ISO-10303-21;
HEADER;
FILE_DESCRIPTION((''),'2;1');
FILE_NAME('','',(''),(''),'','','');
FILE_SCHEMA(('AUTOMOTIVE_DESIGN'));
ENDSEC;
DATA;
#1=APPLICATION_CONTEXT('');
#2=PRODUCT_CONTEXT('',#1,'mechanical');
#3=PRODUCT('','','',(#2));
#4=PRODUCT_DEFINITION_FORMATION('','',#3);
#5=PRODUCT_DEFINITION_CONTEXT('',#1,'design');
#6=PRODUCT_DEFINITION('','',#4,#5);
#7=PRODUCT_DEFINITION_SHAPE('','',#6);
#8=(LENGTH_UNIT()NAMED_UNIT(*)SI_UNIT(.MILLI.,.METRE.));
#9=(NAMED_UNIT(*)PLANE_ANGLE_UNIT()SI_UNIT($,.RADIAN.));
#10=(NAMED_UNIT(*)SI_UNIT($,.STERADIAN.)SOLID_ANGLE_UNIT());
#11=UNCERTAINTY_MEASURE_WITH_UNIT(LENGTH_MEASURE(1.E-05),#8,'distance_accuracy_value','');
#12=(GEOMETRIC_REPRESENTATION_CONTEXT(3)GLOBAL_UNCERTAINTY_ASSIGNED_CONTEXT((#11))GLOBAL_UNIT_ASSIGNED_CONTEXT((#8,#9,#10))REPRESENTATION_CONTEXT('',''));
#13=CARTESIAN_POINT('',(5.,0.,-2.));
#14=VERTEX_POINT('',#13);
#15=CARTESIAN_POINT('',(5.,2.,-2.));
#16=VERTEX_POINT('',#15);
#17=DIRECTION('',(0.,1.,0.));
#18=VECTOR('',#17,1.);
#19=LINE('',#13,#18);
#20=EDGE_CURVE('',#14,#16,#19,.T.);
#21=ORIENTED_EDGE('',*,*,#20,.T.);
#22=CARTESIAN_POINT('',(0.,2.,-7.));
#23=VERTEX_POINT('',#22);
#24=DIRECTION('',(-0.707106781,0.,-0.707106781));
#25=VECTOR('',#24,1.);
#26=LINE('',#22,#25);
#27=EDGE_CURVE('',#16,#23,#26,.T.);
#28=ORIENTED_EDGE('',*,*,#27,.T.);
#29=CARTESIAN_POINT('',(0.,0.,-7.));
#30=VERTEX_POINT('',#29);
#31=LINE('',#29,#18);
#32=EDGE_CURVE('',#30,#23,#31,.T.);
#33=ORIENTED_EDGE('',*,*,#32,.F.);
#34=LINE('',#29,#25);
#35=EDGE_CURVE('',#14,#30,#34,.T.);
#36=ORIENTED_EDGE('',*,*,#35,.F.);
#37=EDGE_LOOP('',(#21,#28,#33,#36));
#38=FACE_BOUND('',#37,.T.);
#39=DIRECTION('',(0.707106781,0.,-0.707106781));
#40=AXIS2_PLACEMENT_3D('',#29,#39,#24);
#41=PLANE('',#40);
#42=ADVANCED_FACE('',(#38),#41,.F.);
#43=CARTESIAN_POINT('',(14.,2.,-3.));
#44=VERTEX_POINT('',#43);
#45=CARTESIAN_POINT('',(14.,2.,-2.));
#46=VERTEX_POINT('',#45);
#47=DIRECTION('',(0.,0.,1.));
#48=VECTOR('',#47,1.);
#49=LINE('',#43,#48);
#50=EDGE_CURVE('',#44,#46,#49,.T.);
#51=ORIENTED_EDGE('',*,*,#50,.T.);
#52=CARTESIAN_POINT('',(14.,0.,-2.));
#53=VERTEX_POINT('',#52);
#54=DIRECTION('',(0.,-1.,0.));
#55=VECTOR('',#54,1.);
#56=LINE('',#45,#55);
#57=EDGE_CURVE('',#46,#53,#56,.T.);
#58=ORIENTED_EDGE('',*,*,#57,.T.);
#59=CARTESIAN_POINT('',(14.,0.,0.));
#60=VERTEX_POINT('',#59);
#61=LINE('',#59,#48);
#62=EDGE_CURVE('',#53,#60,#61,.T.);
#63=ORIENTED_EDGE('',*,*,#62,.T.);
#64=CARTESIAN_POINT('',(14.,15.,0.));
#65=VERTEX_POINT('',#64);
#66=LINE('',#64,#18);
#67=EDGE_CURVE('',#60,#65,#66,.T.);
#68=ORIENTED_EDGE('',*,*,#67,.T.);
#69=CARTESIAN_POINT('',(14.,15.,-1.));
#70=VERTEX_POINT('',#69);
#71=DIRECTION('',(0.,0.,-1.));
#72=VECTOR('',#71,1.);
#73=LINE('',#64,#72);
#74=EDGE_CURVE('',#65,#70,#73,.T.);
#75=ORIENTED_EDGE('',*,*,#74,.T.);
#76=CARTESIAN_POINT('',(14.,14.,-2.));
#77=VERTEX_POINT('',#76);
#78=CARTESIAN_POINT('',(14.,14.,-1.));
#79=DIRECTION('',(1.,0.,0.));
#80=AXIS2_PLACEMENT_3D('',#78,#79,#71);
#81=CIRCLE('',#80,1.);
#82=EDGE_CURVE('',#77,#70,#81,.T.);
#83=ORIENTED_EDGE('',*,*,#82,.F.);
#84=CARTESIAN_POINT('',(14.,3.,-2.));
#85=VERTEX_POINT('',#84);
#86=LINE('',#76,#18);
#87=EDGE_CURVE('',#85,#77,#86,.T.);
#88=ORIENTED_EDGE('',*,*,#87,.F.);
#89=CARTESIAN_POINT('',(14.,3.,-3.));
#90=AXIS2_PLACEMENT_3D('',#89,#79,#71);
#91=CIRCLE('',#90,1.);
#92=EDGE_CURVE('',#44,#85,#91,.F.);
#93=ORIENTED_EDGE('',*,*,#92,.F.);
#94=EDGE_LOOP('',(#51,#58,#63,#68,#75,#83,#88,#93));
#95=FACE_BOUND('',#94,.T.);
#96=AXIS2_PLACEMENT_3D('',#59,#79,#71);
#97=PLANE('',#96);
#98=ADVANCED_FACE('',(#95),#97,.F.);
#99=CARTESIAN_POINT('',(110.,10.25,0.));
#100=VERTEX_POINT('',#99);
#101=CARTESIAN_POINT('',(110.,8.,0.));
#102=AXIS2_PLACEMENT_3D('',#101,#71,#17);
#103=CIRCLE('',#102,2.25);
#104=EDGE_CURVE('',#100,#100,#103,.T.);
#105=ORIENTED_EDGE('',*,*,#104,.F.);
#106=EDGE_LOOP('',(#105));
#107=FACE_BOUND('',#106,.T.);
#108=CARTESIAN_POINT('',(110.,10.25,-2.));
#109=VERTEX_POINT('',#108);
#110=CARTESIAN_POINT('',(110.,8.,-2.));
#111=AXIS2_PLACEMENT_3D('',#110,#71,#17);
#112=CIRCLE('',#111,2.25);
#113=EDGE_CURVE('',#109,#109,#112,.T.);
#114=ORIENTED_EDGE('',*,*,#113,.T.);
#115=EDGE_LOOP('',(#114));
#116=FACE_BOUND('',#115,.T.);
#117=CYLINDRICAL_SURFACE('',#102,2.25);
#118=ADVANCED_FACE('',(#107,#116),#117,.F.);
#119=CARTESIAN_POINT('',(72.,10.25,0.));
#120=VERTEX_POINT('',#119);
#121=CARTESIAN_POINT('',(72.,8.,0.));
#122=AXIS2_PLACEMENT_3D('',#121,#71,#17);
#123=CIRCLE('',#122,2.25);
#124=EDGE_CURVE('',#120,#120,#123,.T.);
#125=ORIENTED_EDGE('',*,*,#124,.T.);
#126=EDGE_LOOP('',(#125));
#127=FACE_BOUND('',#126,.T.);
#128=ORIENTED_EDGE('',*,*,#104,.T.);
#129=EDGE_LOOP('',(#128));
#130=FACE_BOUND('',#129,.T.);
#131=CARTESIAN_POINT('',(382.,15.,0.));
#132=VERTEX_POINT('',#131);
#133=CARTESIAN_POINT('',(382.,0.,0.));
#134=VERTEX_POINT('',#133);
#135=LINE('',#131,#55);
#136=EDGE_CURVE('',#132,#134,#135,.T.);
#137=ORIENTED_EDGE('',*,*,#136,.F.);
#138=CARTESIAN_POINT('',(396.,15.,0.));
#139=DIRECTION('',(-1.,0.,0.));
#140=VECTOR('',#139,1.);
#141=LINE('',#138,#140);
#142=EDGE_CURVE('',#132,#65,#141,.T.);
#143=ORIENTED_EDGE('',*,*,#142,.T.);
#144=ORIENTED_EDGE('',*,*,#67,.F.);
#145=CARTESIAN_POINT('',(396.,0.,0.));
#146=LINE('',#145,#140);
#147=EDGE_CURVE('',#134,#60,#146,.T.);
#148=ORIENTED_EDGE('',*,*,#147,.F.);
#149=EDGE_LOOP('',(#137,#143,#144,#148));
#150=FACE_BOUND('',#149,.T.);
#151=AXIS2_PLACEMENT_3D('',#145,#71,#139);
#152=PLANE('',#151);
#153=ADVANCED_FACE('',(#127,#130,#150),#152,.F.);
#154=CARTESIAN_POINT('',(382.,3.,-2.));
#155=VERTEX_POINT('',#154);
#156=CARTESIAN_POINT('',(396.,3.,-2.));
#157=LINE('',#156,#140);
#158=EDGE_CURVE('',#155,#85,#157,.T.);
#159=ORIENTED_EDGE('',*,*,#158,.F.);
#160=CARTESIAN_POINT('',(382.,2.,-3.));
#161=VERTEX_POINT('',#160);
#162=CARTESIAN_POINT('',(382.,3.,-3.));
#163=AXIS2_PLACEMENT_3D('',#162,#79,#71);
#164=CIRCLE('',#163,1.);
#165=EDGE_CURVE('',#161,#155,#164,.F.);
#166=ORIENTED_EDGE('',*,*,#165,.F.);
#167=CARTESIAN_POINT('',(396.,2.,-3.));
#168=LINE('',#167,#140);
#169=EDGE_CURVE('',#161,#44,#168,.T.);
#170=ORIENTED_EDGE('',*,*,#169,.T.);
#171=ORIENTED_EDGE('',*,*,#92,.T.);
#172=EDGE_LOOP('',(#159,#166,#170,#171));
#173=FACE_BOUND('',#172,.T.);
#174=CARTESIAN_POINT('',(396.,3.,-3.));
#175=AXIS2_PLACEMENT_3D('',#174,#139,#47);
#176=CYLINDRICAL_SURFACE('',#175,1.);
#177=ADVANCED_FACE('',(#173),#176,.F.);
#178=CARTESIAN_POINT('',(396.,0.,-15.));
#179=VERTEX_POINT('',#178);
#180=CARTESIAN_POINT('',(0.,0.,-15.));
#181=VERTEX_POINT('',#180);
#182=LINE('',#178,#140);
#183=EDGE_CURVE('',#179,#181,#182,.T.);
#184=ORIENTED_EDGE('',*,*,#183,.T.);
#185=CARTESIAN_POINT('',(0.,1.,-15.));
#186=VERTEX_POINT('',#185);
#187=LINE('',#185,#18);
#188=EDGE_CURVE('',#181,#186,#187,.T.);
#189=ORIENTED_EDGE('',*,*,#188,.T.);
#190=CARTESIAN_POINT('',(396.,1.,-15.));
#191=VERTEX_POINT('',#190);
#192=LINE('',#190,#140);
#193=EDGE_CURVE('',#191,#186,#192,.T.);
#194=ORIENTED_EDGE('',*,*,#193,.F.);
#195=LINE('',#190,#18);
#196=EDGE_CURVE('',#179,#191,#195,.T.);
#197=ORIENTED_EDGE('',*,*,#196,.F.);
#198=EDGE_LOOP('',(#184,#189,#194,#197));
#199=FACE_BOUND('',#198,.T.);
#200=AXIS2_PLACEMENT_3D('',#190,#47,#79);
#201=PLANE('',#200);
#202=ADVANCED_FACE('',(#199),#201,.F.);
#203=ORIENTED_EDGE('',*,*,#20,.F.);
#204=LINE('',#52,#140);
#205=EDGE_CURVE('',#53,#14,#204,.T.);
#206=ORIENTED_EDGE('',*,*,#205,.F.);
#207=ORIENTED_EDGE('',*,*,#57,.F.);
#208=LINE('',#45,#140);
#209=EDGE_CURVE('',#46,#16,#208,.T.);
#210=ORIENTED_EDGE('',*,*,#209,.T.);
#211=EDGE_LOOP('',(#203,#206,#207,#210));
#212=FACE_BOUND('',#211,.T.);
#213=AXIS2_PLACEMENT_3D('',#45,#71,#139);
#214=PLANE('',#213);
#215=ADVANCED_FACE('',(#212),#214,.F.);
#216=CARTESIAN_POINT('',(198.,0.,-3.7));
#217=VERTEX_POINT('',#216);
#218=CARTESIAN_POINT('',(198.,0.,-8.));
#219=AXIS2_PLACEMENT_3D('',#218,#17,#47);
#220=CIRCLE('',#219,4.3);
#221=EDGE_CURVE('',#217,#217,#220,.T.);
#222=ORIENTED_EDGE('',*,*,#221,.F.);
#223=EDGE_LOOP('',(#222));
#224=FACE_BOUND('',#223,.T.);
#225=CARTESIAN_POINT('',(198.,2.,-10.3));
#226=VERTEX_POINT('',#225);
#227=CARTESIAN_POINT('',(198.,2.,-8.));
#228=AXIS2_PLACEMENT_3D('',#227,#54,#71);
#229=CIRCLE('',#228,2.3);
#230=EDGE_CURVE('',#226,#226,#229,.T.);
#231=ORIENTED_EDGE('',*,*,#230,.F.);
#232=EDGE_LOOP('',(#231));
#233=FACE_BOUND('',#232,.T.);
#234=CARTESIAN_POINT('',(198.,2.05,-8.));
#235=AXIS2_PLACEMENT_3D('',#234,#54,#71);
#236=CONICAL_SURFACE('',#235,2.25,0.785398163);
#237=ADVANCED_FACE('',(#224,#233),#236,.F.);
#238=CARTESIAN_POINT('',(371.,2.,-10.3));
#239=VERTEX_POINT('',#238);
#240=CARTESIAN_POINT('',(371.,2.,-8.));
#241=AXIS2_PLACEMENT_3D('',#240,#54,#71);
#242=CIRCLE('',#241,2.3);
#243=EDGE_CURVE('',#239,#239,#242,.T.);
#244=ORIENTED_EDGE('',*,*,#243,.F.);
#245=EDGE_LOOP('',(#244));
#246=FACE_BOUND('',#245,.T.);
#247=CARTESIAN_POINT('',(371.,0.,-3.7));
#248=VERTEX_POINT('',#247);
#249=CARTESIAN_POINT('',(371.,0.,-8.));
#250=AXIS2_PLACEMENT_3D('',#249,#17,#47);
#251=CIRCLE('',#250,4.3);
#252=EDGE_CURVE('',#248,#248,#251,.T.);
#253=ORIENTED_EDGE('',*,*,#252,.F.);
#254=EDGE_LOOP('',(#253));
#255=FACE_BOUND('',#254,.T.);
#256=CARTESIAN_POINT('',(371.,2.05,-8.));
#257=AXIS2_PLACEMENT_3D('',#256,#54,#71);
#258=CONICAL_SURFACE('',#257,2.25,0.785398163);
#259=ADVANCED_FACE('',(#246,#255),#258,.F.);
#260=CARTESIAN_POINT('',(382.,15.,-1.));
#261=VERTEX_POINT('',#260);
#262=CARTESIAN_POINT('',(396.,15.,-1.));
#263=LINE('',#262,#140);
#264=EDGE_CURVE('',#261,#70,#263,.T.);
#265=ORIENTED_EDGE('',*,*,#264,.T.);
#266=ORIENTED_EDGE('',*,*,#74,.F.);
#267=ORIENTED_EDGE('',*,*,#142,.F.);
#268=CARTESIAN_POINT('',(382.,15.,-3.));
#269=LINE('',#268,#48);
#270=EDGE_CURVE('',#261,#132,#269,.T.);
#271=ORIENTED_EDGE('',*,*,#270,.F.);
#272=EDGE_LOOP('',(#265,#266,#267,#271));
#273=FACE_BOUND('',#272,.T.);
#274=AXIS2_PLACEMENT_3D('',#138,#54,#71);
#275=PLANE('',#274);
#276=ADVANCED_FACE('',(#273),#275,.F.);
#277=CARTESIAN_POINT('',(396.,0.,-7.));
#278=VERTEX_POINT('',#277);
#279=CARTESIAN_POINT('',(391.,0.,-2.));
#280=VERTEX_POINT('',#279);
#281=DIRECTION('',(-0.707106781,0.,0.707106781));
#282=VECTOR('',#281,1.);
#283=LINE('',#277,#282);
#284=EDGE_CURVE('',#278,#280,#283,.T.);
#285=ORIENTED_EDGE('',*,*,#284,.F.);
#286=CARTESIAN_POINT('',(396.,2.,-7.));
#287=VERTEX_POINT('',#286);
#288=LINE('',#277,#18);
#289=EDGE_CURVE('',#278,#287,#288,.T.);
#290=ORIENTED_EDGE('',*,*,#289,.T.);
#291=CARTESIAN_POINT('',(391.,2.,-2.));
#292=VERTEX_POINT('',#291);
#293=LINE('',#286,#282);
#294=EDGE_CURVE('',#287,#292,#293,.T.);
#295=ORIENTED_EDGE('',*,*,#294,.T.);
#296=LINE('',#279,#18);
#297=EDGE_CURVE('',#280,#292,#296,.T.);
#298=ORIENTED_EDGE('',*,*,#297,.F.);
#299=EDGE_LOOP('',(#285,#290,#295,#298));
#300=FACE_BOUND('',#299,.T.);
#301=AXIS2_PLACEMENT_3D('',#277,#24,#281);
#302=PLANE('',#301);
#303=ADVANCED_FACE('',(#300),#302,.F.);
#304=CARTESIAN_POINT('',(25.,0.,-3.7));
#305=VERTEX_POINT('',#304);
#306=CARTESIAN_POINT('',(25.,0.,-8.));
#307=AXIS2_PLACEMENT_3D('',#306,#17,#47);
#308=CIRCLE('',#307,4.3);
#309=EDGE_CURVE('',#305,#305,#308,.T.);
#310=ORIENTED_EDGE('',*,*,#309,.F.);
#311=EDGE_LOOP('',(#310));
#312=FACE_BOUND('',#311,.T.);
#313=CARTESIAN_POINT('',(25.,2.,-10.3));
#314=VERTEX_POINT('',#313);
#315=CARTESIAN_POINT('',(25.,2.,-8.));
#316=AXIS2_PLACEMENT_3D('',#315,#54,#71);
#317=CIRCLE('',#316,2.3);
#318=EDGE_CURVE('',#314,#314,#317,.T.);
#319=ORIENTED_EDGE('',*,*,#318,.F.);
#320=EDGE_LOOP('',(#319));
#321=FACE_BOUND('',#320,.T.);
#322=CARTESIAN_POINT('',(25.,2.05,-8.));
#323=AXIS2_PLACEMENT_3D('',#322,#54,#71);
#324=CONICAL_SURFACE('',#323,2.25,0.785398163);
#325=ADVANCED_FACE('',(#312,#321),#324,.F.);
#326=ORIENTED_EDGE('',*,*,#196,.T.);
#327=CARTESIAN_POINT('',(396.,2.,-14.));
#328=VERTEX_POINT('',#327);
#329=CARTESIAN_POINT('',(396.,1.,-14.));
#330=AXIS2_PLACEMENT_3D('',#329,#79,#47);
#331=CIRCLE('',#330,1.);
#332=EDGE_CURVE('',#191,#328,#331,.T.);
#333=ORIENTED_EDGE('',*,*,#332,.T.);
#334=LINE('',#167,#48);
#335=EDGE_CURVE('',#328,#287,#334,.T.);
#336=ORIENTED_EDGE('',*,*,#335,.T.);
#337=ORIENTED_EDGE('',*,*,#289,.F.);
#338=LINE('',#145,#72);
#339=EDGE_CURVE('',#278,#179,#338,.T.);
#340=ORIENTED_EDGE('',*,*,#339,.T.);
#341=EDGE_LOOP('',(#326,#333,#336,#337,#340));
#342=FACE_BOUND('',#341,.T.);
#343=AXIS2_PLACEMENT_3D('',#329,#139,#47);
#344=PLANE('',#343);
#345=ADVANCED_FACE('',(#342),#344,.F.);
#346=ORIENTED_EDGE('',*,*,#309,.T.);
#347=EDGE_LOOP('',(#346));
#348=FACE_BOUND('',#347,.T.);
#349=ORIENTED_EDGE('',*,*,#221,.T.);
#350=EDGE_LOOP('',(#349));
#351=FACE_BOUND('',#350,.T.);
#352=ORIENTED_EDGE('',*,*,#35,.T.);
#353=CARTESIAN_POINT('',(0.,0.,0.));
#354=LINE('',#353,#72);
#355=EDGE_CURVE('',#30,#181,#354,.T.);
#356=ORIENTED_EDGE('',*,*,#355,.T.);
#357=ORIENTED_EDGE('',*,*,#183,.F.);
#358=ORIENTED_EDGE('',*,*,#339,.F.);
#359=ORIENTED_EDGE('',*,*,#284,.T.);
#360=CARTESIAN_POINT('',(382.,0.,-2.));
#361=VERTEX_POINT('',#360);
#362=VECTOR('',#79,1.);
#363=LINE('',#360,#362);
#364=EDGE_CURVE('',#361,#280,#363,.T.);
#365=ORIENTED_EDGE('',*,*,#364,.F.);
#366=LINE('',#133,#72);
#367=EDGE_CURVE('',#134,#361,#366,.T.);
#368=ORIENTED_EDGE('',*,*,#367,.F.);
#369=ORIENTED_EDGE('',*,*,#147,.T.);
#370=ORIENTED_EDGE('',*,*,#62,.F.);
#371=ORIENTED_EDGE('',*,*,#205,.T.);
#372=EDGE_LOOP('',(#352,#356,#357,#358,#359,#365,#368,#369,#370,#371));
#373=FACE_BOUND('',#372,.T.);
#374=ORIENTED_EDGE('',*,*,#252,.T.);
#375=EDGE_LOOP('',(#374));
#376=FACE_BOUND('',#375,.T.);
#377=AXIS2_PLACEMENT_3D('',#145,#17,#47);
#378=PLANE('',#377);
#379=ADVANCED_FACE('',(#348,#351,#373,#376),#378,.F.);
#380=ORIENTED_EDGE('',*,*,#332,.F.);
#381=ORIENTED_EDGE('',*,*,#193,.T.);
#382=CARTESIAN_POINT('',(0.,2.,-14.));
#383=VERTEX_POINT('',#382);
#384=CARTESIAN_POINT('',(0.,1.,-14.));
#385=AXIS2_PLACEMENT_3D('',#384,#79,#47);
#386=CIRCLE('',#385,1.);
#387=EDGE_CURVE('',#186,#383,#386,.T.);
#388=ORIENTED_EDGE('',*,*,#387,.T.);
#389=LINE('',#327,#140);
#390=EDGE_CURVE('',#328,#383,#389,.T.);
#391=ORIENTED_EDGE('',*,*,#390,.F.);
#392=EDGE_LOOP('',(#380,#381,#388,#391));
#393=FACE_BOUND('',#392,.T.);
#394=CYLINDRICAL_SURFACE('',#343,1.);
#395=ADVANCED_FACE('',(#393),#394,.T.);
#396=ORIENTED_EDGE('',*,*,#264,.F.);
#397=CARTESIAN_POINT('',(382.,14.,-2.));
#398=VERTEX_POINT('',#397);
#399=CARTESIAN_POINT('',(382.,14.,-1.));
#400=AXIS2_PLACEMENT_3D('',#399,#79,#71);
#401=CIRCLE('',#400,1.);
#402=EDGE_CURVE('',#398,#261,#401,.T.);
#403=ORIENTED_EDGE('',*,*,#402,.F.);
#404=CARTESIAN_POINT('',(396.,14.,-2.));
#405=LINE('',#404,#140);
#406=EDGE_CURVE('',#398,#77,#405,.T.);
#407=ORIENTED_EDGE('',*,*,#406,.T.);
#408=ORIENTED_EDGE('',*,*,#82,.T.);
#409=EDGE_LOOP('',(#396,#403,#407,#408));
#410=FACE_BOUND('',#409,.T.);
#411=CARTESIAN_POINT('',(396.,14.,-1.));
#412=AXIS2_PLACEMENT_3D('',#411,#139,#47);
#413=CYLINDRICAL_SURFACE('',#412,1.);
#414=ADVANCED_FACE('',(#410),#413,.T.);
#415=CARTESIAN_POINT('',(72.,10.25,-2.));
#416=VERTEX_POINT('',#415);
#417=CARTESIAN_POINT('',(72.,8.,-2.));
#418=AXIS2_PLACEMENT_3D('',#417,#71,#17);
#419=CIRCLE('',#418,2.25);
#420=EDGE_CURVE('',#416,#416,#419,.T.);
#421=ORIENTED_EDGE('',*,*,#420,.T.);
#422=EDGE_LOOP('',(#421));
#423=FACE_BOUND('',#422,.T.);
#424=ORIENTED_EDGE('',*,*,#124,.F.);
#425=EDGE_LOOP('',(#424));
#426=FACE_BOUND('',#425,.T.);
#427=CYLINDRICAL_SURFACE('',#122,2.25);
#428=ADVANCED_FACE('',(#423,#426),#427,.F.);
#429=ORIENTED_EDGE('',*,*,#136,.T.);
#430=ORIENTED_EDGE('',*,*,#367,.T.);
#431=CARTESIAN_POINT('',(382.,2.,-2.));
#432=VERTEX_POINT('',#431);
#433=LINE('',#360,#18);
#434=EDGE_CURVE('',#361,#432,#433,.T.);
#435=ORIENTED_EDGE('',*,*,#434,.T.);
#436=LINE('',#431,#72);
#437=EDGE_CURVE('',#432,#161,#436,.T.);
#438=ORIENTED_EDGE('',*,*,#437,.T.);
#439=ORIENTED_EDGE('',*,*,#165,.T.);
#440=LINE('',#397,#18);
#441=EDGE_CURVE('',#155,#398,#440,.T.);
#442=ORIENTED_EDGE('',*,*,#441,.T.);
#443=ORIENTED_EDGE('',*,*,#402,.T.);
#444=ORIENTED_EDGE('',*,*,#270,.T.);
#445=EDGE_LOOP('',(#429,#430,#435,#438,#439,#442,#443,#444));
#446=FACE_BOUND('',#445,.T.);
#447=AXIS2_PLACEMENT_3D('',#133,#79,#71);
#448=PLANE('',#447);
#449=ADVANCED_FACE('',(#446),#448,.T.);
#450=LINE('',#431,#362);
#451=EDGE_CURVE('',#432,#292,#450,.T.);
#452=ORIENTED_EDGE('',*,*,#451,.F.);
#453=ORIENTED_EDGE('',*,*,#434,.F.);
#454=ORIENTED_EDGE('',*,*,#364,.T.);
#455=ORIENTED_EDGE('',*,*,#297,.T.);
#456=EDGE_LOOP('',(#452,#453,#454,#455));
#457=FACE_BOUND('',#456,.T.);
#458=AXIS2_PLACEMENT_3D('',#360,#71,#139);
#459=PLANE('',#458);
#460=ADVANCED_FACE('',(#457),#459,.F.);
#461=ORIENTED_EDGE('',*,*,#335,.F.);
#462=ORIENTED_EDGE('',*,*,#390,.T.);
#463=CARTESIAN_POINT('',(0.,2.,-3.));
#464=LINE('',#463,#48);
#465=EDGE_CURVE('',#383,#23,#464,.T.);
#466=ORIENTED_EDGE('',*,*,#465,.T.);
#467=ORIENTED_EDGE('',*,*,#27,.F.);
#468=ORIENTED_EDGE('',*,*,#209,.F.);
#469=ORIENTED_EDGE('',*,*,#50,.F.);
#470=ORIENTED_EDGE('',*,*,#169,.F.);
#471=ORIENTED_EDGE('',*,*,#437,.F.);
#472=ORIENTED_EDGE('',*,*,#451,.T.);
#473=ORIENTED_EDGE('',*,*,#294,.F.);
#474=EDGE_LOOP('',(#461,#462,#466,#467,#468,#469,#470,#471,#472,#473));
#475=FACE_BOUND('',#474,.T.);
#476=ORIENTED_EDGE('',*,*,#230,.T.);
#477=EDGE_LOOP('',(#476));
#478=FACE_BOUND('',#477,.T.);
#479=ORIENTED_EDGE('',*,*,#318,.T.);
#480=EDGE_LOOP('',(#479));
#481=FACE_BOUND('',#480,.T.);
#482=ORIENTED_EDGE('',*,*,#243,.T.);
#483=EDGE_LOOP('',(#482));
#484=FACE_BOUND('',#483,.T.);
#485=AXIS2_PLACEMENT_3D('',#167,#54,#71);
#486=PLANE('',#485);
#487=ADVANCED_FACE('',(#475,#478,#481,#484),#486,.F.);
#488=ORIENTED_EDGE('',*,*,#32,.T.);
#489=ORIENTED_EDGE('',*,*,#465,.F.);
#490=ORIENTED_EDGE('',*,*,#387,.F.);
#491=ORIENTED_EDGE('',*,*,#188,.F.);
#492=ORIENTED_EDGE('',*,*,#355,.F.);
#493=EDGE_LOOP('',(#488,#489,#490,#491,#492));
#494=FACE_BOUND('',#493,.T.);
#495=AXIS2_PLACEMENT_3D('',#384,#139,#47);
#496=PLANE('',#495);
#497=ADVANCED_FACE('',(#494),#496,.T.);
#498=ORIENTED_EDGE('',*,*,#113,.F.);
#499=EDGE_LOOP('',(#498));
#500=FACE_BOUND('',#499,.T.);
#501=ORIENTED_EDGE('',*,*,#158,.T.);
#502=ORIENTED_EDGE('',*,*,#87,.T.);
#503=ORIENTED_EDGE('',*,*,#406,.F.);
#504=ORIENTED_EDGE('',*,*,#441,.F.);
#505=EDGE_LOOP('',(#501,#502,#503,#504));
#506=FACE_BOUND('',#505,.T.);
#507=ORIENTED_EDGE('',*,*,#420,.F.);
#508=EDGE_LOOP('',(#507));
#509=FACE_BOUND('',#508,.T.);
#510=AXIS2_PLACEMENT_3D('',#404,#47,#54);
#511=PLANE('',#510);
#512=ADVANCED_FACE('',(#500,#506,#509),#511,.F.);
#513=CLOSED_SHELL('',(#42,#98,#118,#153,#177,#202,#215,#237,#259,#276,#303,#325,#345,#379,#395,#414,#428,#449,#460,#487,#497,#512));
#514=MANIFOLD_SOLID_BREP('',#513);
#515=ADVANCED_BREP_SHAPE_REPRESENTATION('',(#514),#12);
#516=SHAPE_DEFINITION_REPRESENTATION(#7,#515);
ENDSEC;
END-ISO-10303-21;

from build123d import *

# Parameters (mm, degrees)
EXTRUDE_1_DEPTH     = 396
SKETCH_4_R          = 2.25
CUT_EXTRUDE_3_DEPTH = 2
CHAMFER_1_SIZE      = 2.05
CUT_EXTRUDE_5_DEPTH = 14
CUT_EXTRUDE_6_DEPTH = 14
CUT_EXTRUDE_7_DEPTH = 397.497162663
SKETCH_10_R         = 2.25
CUT_EXTRUDE_8_DEPTH = 397.497162663


with BuildPart() as part:
    # Эскиз1 → Бобышка-Вытянуть1 (new body)
    with BuildSketch(Plane(origin=(0, 0, 0), x_dir=(0, 0, -1), z_dir=(1, 0, 0))):
        with BuildLine():
            Line((0, 0), (0, 15))
            Line((0, 15), (1, 15))
            ThreePointArc((1, 15), (1.707106781, 14.707106781), (2, 14))
            Line((2, 14), (2, 3))
            ThreePointArc((2, 3), (2.292893219, 2.292893219), (3, 2))
            Line((3, 2), (14, 2))
            ThreePointArc((14, 2), (14.707106781, 1.707106781), (15, 1))
            Line((15, 1), (15, 0))
            Line((15, 0), (0, 0))
        make_face()
    extrude(amount=EXTRUDE_1_DEPTH)

    # Эскиз4 → Вырез-Вытянуть3 (cut)
    with BuildSketch(Plane.XZ):
        with Locations(Location((371, -8, 0), (0, 0, 270))):
            Circle(SKETCH_4_R)
        with Locations(Location((198, -8, 0), (0, 0, 270))):
            Circle(SKETCH_4_R)
        with Locations(Location((25, -8, 0), (0, 0, 270))):
            Circle(SKETCH_4_R)
    extrude(amount=-CUT_EXTRUDE_3_DEPTH, mode=Mode.SUBTRACT)

    # Фаска1
    # the kernel refuses this chamfer: 2.05 mm, written as the material it takes off along each edge
    with BuildSketch(Plane(origin=(25, 0, -8), x_dir=(0, 0, -1), z_dir=(-1, 0, 0))) as chamfer_1_piece_1:
        Polygon((2.25 + CHAMFER_1_SIZE, 0), (2.25, -CHAMFER_1_SIZE), (2.25, 0), align=None)
    revolve(axis=Axis((25, 0, -8), (0, -1, 0)), mode=Mode.SUBTRACT)
    with BuildSketch(Plane(origin=(371, 0, -8), x_dir=(0, 0, -1), z_dir=(-1, 0, 0))) as chamfer_1_piece_2:
        Polygon((2.25 + CHAMFER_1_SIZE, 0), (2.25, -CHAMFER_1_SIZE), (2.25, 0), align=None)
    revolve(axis=Axis((371, 0, -8), (0, -1, 0)), mode=Mode.SUBTRACT)
    with BuildSketch(Plane(origin=(198, 0, -8), x_dir=(0, 0, -1), z_dir=(-1, 0, 0))) as chamfer_1_piece_3:
        Polygon((2.25 + CHAMFER_1_SIZE, 0), (2.25, -CHAMFER_1_SIZE), (2.25, 0), align=None)
    revolve(axis=Axis((198, 0, -8), (0, -1, 0)), mode=Mode.SUBTRACT)

    # Эскиз6 → Вырез-Вытянуть5 (cut)
    with BuildSketch(Plane(origin=(396, 0, 0), x_dir=(0, 0, -1), z_dir=(1, 0, 0))):
        Polygon((0, 15), (2, 15), (3, 15), (3, 2), (2, 2), (2, 0), (0, 0), align=None)
    extrude(amount=-CUT_EXTRUDE_5_DEPTH, mode=Mode.SUBTRACT)

    # Эскиз7 → Вырез-Вытянуть6 (cut)
    with BuildSketch(Plane.ZY):
        Polygon((0, 15), (-2, 15), (-3, 15), (-3, 2), (-2, 2), (-2, 0), (0, 0), align=None)
    extrude(amount=-CUT_EXTRUDE_6_DEPTH, mode=Mode.SUBTRACT)

    # Эскиз9 → Вырез-Вытянуть7 (cut, through all)
    with BuildSketch(Plane(origin=(0, 2, 0), x_dir=(1, 0, 0), z_dir=(0, 1, 0))):
        Polygon((0, 2), (0, 7), (5, 2), align=None)
        Polygon((396, 2), (396, 7), (391, 2), align=None)
    extrude(amount=-CUT_EXTRUDE_7_DEPTH, mode=Mode.SUBTRACT)

    # Эскиз10 → Вырез-Вытянуть8 (cut, through all)
    with BuildSketch(Plane(origin=(0, 0, -2), x_dir=(-1, 0, 0), z_dir=(0, 0, -1))):
        with Locations(Location((-72, 8, 0), (0, 0, 90))):
            Circle(SKETCH_10_R)
        with Locations(Location((-110, 8, 0), (0, 0, 90))):
            Circle(SKETCH_10_R)
    extrude(amount=-CUT_EXTRUDE_8_DEPTH, mode=Mode.SUBTRACT)


solid = part.part
